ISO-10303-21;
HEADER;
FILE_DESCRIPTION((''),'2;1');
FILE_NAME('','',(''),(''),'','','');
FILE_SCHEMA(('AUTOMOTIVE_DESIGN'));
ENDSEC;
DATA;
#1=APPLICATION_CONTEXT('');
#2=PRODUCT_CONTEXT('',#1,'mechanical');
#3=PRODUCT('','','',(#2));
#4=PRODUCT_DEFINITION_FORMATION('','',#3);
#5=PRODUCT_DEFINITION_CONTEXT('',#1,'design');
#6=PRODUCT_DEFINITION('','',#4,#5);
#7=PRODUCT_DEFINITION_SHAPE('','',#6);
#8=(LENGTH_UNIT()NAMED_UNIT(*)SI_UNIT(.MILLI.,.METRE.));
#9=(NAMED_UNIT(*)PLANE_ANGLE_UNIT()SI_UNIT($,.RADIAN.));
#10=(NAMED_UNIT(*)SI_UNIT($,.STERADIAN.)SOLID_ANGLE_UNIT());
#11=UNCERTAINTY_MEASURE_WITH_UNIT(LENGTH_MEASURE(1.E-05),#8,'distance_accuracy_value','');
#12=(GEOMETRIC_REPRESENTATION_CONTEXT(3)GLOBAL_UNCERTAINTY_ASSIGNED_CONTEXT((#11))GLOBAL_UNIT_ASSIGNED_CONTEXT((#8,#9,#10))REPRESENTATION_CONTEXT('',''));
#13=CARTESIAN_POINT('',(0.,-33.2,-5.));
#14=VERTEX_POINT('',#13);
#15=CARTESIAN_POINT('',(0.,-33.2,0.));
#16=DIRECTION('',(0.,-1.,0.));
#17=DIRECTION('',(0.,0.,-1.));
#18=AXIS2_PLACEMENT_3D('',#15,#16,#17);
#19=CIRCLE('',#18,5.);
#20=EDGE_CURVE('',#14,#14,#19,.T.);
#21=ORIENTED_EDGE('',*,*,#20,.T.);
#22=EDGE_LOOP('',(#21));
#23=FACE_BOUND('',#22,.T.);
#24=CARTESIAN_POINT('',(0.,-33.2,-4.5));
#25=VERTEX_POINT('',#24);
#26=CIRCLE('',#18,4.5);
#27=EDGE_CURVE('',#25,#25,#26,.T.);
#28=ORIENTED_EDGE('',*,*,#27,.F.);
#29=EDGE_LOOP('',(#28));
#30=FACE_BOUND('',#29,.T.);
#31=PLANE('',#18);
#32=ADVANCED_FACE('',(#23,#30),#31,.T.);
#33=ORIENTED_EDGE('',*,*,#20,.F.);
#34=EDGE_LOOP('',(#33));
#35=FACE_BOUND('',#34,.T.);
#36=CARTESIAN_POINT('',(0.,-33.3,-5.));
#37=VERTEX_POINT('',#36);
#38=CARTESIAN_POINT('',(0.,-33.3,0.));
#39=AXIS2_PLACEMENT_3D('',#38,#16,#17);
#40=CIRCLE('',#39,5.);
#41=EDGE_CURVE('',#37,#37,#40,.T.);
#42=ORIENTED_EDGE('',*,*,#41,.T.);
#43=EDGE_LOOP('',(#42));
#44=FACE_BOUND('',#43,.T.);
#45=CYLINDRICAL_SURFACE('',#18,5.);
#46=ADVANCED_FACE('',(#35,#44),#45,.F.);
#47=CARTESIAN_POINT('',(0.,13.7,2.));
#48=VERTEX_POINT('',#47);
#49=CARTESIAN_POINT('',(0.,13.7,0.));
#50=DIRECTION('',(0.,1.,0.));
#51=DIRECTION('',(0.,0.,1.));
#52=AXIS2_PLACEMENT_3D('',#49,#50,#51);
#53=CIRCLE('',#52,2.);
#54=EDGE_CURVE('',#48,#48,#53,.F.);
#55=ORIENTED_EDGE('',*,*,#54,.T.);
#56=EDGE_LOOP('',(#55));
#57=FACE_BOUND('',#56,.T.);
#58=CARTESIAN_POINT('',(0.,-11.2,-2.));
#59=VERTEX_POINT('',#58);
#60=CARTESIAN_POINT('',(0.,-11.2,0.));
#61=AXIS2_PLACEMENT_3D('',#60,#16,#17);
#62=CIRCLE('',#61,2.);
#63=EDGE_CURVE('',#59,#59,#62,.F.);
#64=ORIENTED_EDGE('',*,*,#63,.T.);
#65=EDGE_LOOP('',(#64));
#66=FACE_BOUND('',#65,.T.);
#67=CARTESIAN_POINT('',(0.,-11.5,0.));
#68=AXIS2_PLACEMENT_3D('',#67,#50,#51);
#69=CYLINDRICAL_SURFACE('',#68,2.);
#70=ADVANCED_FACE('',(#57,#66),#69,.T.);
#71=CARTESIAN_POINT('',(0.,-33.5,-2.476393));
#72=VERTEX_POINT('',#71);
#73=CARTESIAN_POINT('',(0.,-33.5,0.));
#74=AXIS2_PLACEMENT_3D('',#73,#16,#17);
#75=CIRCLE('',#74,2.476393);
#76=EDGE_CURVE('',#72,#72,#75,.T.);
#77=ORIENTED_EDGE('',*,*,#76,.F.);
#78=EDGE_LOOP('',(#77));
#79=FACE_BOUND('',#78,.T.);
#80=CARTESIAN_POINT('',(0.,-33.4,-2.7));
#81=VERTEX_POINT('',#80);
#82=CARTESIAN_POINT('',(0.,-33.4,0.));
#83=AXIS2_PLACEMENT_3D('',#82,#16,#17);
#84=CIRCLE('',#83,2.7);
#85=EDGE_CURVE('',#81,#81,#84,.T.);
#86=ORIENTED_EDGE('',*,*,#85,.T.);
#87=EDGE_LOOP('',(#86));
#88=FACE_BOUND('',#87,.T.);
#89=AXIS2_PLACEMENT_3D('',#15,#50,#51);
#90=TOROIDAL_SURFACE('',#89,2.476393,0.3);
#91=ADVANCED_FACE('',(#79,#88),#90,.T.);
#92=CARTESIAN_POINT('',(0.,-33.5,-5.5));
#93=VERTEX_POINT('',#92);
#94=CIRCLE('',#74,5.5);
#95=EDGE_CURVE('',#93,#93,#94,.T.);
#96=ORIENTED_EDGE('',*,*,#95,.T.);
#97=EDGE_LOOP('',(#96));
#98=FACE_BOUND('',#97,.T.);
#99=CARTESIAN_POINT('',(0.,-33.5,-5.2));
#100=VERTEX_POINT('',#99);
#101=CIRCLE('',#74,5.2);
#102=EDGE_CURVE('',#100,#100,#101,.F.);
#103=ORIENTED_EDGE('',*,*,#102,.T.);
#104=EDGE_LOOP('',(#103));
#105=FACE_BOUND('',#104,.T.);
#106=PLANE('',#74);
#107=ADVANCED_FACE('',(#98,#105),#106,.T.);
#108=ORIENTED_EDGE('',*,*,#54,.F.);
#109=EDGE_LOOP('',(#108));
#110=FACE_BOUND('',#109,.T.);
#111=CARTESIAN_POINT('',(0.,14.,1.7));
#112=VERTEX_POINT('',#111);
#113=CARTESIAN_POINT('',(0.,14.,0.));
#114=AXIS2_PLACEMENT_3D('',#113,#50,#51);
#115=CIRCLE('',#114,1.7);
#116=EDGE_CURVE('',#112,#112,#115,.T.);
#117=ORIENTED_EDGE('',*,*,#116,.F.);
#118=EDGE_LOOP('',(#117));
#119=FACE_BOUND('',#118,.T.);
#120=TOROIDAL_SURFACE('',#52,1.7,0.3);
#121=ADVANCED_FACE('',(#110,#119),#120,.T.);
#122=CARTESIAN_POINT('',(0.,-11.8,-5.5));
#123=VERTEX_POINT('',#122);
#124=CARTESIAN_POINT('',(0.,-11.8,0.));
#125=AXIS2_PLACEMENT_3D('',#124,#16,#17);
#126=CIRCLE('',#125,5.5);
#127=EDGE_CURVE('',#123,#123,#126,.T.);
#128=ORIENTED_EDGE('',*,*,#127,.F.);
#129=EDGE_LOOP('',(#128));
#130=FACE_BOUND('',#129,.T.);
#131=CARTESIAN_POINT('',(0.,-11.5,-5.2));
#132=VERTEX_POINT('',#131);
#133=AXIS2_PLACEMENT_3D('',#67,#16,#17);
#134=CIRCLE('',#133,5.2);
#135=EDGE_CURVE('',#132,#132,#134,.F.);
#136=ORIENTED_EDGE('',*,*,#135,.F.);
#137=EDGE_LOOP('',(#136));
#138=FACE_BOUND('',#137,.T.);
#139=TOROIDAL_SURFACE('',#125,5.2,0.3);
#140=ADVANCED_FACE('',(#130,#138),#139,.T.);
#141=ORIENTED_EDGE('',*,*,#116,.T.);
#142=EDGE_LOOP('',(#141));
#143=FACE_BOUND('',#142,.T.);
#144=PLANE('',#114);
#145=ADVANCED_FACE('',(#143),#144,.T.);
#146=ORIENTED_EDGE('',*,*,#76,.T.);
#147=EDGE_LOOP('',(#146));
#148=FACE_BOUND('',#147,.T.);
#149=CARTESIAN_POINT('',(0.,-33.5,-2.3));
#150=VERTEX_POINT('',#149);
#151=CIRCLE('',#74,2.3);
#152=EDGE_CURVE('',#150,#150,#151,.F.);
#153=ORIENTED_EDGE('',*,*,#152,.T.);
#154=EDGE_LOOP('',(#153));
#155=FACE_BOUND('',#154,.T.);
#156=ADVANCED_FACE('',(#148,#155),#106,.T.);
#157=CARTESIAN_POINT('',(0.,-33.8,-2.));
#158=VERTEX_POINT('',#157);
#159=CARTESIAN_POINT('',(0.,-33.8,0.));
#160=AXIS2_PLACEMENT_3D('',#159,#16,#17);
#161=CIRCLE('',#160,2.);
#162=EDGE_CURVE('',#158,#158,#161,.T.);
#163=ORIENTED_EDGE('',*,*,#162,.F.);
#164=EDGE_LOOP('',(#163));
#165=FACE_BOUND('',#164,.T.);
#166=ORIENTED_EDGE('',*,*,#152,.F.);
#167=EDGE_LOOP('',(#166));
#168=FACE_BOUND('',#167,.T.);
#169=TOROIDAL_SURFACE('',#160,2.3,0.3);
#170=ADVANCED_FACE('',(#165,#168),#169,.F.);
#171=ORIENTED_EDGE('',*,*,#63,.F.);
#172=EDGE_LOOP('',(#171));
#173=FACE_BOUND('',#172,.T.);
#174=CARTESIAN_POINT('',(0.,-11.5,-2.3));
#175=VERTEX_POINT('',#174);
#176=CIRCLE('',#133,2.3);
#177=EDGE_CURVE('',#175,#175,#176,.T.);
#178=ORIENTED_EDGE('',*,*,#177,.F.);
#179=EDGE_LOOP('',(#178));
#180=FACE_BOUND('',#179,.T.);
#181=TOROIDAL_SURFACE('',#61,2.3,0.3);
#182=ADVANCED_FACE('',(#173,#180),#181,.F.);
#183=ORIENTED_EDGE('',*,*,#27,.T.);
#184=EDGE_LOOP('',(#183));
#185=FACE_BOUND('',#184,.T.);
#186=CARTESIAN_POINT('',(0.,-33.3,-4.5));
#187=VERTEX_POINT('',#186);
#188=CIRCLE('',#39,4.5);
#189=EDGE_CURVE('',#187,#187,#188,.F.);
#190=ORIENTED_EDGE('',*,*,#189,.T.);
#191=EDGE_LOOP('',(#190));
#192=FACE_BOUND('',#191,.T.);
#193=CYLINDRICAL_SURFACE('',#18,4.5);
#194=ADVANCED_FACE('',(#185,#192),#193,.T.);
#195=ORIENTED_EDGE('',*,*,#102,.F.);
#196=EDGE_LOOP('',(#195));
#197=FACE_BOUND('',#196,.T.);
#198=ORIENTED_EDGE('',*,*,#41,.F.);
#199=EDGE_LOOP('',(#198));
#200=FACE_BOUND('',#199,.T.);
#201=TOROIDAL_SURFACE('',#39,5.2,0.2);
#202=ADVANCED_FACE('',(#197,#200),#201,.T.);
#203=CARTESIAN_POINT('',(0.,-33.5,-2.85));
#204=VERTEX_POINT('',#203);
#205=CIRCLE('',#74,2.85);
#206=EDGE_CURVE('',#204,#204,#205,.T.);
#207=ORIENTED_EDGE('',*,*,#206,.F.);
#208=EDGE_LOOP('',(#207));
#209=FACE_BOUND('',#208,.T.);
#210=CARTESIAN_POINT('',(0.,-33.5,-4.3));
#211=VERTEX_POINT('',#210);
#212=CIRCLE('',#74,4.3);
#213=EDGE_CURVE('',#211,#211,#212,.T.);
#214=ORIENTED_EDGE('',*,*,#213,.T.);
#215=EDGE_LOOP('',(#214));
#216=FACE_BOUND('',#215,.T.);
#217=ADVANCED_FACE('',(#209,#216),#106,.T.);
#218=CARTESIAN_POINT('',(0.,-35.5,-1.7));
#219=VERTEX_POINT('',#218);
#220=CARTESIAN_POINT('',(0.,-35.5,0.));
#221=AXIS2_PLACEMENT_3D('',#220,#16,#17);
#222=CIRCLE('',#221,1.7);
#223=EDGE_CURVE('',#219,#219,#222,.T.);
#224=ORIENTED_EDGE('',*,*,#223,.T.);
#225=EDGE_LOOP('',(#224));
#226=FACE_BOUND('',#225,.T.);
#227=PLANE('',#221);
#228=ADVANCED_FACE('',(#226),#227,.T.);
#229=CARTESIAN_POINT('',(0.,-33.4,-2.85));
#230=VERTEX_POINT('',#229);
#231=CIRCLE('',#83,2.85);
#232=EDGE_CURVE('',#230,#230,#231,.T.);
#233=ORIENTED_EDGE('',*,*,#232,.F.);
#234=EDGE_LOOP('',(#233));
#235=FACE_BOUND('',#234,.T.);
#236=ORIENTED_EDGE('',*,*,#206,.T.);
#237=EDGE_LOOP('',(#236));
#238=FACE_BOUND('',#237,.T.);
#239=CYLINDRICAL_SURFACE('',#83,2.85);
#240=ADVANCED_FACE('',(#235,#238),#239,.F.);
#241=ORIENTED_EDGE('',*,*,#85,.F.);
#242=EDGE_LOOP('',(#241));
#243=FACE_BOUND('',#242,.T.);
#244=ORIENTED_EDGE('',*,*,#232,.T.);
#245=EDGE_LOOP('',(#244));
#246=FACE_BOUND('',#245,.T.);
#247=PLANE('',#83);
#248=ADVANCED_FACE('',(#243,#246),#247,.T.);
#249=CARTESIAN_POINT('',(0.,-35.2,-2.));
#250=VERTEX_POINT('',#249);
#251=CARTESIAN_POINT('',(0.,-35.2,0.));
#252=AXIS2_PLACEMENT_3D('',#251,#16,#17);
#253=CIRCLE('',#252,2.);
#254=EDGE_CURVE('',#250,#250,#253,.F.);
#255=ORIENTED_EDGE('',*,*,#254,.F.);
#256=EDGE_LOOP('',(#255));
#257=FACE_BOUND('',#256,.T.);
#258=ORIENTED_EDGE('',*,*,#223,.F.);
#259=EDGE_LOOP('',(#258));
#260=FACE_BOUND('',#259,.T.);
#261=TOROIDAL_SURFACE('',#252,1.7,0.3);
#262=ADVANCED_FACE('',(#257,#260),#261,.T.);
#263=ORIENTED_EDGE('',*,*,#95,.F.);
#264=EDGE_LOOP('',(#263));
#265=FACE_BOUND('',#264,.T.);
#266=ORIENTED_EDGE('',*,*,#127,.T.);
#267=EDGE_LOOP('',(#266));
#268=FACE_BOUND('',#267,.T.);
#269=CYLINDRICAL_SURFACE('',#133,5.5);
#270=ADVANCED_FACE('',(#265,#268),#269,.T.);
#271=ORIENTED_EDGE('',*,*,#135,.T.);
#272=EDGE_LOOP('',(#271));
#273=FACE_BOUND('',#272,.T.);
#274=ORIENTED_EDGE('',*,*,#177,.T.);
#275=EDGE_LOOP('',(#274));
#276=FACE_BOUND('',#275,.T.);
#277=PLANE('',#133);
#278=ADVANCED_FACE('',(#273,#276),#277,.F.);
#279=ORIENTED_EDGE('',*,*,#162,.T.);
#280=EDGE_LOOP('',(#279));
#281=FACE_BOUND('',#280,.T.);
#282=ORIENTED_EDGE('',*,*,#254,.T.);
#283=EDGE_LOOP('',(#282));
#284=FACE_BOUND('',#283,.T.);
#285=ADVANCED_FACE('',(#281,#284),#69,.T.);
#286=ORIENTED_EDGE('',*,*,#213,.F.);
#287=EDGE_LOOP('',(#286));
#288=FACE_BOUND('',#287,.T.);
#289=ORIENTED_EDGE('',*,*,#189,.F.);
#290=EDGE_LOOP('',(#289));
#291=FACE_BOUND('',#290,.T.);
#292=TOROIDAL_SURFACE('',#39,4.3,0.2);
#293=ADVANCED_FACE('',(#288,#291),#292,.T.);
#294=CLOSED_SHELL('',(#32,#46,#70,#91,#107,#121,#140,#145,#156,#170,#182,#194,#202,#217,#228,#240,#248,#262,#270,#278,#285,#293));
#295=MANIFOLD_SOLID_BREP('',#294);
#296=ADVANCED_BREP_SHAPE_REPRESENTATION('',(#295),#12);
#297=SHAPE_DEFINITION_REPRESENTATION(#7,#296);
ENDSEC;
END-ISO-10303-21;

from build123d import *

# Parameters (mm, degrees)
SKETCH1_R           = 2
BOSS_EXTRUDE1_DEPTH = 11.5
BOSS_EXTRUDE2_START = 14
SKETCH3_R           = 2
BOSS_EXTRUDE2_DEPTH = 14
SKETCH4_R           = 2
BOSS_EXTRUDE3_DEPTH = 24
SKETCH5_R           = 5.5
BOSS_EXTRUDE4_DEPTH = 22
FILLET1_R           = 0.3
FILLET2_R           = 0.3
SKETCH6_R           = 2.85
SKETCH6_R_2         = 2.7
CUT_EXTRUDE1_DEPTH  = 0.1
FILLET3_R           = 0.3
SKETCH7_R           = 5
SKETCH7_R_2         = 4.5
CUT_EXTRUDE2_DEPTH  = 0.3
FILLET4_R           = 0.2


with BuildPart() as part:
    # Sketch1 → Boss-Extrude1 (new body)
    with BuildSketch(Plane(origin=(0, 0, 0), x_dir=(1, 0, 0), z_dir=(0, 1, 0))):
        with Locations(Location((0, 0, 0), (0, 0, 270))):
            Circle(SKETCH1_R)
    extrude(amount=-BOSS_EXTRUDE1_DEPTH)

    # Sketch3 → Boss-Extrude2 (add)
    with BuildSketch(Plane(origin=(0, 0, 0), x_dir=(1, 0, 0), z_dir=(0, 1, 0)).offset(BOSS_EXTRUDE2_START)):
        with Locations(Location((0, 0, 0), (0, 0, 270))):
            Circle(SKETCH3_R)
    extrude(amount=-BOSS_EXTRUDE2_DEPTH)

    # Sketch4 → Boss-Extrude3 (add)
    with BuildSketch(Plane.XZ.offset(11.5)):
        with Locations(Location((0, 0, 0), (0, 0, 90))):
            Circle(SKETCH4_R)
    extrude(amount=BOSS_EXTRUDE3_DEPTH)

    # Sketch5 → Boss-Extrude4 (add)
    with BuildSketch(Plane(origin=(0, -33.5, 0), x_dir=(-1, 0, 0), z_dir=(0, -1, 0))):
        with Locations(Location((0, 0, 0), (0, 0, 90))):
            Circle(SKETCH5_R)
    extrude(amount=-BOSS_EXTRUDE4_DEPTH)

    # Fillet1
    fillet1_edges = [part.edges().sort_by_distance(p)[0] for p in [
        (0, -35.5, -2),
        (0, 14, -2),
    ]]
    fillet(fillet1_edges, radius=FILLET1_R)

    # Fillet2
    fillet2_edges = [part.edges().sort_by_distance(p)[0] for p in [
        (0, -33.5, -2),
        (0, -11.5, -2),
        (0, -11.5, 5.5),
    ]]
    fillet(fillet2_edges, radius=FILLET2_R)

    # Sketch6 → Cut-Extrude1 (cut)
    with BuildSketch(Plane.XZ.offset(33.5)):
        with Locations(Location((0, 0, 0), (0, 0, 270))):
            Circle(SKETCH6_R)
        with Locations(Location((0, 0, 0), (0, 0, 270))):
            Circle(SKETCH6_R_2, mode=Mode.SUBTRACT)
    extrude(amount=-CUT_EXTRUDE1_DEPTH, mode=Mode.SUBTRACT)

    # Fillet3
    # the kernel refuses this fillet: 0.3 mm, written as the material it takes off along each edge
    with BuildSketch(Plane(origin=(0, -33.5, 0), x_dir=(0, 0, -1), z_dir=(-1, 0, 0))) as fillet3_piece_1:
        with BuildLine():
            CenterArc((2.476393202, -0.3), FILLET3_R, 41.810314896, 48.189685104)
            Line((2.476393202, 0), (2.476393202, 0.006))
            Line((2.476393202, 0.006), (2.7, 0.006))
            Line((2.7, 0.006), (2.706, 0))
            ThreePointArc((2.706, 0), (2.706, -0.05), (2.704472136, -0.096))
            Line((2.704472136, -0.096), (2.7, -0.1))
        make_face()
    revolve(axis=Axis((0, -33.5, 0), (0, -1, 0)), mode=Mode.SUBTRACT)

    # Sketch7 → Cut-Extrude2 (cut)
    with BuildSketch(Plane.XZ.offset(33.5)):
        with Locations(Location((0, 0, 0), (0, 0, 270))):
            Circle(SKETCH7_R)
        with Locations(Location((0, 0, 0), (0, 0, 270))):
            Circle(SKETCH7_R_2, mode=Mode.SUBTRACT)
    extrude(amount=-CUT_EXTRUDE2_DEPTH, mode=Mode.SUBTRACT)

    # Fillet4
    fillet4_edges = [part.edges().sort_by_distance(p)[0] for p in [
        (0, -33.5, 5),
        (0, -33.5, 4.5),
    ]]
    fillet(fillet4_edges, radius=FILLET4_R)


solid = part.part
